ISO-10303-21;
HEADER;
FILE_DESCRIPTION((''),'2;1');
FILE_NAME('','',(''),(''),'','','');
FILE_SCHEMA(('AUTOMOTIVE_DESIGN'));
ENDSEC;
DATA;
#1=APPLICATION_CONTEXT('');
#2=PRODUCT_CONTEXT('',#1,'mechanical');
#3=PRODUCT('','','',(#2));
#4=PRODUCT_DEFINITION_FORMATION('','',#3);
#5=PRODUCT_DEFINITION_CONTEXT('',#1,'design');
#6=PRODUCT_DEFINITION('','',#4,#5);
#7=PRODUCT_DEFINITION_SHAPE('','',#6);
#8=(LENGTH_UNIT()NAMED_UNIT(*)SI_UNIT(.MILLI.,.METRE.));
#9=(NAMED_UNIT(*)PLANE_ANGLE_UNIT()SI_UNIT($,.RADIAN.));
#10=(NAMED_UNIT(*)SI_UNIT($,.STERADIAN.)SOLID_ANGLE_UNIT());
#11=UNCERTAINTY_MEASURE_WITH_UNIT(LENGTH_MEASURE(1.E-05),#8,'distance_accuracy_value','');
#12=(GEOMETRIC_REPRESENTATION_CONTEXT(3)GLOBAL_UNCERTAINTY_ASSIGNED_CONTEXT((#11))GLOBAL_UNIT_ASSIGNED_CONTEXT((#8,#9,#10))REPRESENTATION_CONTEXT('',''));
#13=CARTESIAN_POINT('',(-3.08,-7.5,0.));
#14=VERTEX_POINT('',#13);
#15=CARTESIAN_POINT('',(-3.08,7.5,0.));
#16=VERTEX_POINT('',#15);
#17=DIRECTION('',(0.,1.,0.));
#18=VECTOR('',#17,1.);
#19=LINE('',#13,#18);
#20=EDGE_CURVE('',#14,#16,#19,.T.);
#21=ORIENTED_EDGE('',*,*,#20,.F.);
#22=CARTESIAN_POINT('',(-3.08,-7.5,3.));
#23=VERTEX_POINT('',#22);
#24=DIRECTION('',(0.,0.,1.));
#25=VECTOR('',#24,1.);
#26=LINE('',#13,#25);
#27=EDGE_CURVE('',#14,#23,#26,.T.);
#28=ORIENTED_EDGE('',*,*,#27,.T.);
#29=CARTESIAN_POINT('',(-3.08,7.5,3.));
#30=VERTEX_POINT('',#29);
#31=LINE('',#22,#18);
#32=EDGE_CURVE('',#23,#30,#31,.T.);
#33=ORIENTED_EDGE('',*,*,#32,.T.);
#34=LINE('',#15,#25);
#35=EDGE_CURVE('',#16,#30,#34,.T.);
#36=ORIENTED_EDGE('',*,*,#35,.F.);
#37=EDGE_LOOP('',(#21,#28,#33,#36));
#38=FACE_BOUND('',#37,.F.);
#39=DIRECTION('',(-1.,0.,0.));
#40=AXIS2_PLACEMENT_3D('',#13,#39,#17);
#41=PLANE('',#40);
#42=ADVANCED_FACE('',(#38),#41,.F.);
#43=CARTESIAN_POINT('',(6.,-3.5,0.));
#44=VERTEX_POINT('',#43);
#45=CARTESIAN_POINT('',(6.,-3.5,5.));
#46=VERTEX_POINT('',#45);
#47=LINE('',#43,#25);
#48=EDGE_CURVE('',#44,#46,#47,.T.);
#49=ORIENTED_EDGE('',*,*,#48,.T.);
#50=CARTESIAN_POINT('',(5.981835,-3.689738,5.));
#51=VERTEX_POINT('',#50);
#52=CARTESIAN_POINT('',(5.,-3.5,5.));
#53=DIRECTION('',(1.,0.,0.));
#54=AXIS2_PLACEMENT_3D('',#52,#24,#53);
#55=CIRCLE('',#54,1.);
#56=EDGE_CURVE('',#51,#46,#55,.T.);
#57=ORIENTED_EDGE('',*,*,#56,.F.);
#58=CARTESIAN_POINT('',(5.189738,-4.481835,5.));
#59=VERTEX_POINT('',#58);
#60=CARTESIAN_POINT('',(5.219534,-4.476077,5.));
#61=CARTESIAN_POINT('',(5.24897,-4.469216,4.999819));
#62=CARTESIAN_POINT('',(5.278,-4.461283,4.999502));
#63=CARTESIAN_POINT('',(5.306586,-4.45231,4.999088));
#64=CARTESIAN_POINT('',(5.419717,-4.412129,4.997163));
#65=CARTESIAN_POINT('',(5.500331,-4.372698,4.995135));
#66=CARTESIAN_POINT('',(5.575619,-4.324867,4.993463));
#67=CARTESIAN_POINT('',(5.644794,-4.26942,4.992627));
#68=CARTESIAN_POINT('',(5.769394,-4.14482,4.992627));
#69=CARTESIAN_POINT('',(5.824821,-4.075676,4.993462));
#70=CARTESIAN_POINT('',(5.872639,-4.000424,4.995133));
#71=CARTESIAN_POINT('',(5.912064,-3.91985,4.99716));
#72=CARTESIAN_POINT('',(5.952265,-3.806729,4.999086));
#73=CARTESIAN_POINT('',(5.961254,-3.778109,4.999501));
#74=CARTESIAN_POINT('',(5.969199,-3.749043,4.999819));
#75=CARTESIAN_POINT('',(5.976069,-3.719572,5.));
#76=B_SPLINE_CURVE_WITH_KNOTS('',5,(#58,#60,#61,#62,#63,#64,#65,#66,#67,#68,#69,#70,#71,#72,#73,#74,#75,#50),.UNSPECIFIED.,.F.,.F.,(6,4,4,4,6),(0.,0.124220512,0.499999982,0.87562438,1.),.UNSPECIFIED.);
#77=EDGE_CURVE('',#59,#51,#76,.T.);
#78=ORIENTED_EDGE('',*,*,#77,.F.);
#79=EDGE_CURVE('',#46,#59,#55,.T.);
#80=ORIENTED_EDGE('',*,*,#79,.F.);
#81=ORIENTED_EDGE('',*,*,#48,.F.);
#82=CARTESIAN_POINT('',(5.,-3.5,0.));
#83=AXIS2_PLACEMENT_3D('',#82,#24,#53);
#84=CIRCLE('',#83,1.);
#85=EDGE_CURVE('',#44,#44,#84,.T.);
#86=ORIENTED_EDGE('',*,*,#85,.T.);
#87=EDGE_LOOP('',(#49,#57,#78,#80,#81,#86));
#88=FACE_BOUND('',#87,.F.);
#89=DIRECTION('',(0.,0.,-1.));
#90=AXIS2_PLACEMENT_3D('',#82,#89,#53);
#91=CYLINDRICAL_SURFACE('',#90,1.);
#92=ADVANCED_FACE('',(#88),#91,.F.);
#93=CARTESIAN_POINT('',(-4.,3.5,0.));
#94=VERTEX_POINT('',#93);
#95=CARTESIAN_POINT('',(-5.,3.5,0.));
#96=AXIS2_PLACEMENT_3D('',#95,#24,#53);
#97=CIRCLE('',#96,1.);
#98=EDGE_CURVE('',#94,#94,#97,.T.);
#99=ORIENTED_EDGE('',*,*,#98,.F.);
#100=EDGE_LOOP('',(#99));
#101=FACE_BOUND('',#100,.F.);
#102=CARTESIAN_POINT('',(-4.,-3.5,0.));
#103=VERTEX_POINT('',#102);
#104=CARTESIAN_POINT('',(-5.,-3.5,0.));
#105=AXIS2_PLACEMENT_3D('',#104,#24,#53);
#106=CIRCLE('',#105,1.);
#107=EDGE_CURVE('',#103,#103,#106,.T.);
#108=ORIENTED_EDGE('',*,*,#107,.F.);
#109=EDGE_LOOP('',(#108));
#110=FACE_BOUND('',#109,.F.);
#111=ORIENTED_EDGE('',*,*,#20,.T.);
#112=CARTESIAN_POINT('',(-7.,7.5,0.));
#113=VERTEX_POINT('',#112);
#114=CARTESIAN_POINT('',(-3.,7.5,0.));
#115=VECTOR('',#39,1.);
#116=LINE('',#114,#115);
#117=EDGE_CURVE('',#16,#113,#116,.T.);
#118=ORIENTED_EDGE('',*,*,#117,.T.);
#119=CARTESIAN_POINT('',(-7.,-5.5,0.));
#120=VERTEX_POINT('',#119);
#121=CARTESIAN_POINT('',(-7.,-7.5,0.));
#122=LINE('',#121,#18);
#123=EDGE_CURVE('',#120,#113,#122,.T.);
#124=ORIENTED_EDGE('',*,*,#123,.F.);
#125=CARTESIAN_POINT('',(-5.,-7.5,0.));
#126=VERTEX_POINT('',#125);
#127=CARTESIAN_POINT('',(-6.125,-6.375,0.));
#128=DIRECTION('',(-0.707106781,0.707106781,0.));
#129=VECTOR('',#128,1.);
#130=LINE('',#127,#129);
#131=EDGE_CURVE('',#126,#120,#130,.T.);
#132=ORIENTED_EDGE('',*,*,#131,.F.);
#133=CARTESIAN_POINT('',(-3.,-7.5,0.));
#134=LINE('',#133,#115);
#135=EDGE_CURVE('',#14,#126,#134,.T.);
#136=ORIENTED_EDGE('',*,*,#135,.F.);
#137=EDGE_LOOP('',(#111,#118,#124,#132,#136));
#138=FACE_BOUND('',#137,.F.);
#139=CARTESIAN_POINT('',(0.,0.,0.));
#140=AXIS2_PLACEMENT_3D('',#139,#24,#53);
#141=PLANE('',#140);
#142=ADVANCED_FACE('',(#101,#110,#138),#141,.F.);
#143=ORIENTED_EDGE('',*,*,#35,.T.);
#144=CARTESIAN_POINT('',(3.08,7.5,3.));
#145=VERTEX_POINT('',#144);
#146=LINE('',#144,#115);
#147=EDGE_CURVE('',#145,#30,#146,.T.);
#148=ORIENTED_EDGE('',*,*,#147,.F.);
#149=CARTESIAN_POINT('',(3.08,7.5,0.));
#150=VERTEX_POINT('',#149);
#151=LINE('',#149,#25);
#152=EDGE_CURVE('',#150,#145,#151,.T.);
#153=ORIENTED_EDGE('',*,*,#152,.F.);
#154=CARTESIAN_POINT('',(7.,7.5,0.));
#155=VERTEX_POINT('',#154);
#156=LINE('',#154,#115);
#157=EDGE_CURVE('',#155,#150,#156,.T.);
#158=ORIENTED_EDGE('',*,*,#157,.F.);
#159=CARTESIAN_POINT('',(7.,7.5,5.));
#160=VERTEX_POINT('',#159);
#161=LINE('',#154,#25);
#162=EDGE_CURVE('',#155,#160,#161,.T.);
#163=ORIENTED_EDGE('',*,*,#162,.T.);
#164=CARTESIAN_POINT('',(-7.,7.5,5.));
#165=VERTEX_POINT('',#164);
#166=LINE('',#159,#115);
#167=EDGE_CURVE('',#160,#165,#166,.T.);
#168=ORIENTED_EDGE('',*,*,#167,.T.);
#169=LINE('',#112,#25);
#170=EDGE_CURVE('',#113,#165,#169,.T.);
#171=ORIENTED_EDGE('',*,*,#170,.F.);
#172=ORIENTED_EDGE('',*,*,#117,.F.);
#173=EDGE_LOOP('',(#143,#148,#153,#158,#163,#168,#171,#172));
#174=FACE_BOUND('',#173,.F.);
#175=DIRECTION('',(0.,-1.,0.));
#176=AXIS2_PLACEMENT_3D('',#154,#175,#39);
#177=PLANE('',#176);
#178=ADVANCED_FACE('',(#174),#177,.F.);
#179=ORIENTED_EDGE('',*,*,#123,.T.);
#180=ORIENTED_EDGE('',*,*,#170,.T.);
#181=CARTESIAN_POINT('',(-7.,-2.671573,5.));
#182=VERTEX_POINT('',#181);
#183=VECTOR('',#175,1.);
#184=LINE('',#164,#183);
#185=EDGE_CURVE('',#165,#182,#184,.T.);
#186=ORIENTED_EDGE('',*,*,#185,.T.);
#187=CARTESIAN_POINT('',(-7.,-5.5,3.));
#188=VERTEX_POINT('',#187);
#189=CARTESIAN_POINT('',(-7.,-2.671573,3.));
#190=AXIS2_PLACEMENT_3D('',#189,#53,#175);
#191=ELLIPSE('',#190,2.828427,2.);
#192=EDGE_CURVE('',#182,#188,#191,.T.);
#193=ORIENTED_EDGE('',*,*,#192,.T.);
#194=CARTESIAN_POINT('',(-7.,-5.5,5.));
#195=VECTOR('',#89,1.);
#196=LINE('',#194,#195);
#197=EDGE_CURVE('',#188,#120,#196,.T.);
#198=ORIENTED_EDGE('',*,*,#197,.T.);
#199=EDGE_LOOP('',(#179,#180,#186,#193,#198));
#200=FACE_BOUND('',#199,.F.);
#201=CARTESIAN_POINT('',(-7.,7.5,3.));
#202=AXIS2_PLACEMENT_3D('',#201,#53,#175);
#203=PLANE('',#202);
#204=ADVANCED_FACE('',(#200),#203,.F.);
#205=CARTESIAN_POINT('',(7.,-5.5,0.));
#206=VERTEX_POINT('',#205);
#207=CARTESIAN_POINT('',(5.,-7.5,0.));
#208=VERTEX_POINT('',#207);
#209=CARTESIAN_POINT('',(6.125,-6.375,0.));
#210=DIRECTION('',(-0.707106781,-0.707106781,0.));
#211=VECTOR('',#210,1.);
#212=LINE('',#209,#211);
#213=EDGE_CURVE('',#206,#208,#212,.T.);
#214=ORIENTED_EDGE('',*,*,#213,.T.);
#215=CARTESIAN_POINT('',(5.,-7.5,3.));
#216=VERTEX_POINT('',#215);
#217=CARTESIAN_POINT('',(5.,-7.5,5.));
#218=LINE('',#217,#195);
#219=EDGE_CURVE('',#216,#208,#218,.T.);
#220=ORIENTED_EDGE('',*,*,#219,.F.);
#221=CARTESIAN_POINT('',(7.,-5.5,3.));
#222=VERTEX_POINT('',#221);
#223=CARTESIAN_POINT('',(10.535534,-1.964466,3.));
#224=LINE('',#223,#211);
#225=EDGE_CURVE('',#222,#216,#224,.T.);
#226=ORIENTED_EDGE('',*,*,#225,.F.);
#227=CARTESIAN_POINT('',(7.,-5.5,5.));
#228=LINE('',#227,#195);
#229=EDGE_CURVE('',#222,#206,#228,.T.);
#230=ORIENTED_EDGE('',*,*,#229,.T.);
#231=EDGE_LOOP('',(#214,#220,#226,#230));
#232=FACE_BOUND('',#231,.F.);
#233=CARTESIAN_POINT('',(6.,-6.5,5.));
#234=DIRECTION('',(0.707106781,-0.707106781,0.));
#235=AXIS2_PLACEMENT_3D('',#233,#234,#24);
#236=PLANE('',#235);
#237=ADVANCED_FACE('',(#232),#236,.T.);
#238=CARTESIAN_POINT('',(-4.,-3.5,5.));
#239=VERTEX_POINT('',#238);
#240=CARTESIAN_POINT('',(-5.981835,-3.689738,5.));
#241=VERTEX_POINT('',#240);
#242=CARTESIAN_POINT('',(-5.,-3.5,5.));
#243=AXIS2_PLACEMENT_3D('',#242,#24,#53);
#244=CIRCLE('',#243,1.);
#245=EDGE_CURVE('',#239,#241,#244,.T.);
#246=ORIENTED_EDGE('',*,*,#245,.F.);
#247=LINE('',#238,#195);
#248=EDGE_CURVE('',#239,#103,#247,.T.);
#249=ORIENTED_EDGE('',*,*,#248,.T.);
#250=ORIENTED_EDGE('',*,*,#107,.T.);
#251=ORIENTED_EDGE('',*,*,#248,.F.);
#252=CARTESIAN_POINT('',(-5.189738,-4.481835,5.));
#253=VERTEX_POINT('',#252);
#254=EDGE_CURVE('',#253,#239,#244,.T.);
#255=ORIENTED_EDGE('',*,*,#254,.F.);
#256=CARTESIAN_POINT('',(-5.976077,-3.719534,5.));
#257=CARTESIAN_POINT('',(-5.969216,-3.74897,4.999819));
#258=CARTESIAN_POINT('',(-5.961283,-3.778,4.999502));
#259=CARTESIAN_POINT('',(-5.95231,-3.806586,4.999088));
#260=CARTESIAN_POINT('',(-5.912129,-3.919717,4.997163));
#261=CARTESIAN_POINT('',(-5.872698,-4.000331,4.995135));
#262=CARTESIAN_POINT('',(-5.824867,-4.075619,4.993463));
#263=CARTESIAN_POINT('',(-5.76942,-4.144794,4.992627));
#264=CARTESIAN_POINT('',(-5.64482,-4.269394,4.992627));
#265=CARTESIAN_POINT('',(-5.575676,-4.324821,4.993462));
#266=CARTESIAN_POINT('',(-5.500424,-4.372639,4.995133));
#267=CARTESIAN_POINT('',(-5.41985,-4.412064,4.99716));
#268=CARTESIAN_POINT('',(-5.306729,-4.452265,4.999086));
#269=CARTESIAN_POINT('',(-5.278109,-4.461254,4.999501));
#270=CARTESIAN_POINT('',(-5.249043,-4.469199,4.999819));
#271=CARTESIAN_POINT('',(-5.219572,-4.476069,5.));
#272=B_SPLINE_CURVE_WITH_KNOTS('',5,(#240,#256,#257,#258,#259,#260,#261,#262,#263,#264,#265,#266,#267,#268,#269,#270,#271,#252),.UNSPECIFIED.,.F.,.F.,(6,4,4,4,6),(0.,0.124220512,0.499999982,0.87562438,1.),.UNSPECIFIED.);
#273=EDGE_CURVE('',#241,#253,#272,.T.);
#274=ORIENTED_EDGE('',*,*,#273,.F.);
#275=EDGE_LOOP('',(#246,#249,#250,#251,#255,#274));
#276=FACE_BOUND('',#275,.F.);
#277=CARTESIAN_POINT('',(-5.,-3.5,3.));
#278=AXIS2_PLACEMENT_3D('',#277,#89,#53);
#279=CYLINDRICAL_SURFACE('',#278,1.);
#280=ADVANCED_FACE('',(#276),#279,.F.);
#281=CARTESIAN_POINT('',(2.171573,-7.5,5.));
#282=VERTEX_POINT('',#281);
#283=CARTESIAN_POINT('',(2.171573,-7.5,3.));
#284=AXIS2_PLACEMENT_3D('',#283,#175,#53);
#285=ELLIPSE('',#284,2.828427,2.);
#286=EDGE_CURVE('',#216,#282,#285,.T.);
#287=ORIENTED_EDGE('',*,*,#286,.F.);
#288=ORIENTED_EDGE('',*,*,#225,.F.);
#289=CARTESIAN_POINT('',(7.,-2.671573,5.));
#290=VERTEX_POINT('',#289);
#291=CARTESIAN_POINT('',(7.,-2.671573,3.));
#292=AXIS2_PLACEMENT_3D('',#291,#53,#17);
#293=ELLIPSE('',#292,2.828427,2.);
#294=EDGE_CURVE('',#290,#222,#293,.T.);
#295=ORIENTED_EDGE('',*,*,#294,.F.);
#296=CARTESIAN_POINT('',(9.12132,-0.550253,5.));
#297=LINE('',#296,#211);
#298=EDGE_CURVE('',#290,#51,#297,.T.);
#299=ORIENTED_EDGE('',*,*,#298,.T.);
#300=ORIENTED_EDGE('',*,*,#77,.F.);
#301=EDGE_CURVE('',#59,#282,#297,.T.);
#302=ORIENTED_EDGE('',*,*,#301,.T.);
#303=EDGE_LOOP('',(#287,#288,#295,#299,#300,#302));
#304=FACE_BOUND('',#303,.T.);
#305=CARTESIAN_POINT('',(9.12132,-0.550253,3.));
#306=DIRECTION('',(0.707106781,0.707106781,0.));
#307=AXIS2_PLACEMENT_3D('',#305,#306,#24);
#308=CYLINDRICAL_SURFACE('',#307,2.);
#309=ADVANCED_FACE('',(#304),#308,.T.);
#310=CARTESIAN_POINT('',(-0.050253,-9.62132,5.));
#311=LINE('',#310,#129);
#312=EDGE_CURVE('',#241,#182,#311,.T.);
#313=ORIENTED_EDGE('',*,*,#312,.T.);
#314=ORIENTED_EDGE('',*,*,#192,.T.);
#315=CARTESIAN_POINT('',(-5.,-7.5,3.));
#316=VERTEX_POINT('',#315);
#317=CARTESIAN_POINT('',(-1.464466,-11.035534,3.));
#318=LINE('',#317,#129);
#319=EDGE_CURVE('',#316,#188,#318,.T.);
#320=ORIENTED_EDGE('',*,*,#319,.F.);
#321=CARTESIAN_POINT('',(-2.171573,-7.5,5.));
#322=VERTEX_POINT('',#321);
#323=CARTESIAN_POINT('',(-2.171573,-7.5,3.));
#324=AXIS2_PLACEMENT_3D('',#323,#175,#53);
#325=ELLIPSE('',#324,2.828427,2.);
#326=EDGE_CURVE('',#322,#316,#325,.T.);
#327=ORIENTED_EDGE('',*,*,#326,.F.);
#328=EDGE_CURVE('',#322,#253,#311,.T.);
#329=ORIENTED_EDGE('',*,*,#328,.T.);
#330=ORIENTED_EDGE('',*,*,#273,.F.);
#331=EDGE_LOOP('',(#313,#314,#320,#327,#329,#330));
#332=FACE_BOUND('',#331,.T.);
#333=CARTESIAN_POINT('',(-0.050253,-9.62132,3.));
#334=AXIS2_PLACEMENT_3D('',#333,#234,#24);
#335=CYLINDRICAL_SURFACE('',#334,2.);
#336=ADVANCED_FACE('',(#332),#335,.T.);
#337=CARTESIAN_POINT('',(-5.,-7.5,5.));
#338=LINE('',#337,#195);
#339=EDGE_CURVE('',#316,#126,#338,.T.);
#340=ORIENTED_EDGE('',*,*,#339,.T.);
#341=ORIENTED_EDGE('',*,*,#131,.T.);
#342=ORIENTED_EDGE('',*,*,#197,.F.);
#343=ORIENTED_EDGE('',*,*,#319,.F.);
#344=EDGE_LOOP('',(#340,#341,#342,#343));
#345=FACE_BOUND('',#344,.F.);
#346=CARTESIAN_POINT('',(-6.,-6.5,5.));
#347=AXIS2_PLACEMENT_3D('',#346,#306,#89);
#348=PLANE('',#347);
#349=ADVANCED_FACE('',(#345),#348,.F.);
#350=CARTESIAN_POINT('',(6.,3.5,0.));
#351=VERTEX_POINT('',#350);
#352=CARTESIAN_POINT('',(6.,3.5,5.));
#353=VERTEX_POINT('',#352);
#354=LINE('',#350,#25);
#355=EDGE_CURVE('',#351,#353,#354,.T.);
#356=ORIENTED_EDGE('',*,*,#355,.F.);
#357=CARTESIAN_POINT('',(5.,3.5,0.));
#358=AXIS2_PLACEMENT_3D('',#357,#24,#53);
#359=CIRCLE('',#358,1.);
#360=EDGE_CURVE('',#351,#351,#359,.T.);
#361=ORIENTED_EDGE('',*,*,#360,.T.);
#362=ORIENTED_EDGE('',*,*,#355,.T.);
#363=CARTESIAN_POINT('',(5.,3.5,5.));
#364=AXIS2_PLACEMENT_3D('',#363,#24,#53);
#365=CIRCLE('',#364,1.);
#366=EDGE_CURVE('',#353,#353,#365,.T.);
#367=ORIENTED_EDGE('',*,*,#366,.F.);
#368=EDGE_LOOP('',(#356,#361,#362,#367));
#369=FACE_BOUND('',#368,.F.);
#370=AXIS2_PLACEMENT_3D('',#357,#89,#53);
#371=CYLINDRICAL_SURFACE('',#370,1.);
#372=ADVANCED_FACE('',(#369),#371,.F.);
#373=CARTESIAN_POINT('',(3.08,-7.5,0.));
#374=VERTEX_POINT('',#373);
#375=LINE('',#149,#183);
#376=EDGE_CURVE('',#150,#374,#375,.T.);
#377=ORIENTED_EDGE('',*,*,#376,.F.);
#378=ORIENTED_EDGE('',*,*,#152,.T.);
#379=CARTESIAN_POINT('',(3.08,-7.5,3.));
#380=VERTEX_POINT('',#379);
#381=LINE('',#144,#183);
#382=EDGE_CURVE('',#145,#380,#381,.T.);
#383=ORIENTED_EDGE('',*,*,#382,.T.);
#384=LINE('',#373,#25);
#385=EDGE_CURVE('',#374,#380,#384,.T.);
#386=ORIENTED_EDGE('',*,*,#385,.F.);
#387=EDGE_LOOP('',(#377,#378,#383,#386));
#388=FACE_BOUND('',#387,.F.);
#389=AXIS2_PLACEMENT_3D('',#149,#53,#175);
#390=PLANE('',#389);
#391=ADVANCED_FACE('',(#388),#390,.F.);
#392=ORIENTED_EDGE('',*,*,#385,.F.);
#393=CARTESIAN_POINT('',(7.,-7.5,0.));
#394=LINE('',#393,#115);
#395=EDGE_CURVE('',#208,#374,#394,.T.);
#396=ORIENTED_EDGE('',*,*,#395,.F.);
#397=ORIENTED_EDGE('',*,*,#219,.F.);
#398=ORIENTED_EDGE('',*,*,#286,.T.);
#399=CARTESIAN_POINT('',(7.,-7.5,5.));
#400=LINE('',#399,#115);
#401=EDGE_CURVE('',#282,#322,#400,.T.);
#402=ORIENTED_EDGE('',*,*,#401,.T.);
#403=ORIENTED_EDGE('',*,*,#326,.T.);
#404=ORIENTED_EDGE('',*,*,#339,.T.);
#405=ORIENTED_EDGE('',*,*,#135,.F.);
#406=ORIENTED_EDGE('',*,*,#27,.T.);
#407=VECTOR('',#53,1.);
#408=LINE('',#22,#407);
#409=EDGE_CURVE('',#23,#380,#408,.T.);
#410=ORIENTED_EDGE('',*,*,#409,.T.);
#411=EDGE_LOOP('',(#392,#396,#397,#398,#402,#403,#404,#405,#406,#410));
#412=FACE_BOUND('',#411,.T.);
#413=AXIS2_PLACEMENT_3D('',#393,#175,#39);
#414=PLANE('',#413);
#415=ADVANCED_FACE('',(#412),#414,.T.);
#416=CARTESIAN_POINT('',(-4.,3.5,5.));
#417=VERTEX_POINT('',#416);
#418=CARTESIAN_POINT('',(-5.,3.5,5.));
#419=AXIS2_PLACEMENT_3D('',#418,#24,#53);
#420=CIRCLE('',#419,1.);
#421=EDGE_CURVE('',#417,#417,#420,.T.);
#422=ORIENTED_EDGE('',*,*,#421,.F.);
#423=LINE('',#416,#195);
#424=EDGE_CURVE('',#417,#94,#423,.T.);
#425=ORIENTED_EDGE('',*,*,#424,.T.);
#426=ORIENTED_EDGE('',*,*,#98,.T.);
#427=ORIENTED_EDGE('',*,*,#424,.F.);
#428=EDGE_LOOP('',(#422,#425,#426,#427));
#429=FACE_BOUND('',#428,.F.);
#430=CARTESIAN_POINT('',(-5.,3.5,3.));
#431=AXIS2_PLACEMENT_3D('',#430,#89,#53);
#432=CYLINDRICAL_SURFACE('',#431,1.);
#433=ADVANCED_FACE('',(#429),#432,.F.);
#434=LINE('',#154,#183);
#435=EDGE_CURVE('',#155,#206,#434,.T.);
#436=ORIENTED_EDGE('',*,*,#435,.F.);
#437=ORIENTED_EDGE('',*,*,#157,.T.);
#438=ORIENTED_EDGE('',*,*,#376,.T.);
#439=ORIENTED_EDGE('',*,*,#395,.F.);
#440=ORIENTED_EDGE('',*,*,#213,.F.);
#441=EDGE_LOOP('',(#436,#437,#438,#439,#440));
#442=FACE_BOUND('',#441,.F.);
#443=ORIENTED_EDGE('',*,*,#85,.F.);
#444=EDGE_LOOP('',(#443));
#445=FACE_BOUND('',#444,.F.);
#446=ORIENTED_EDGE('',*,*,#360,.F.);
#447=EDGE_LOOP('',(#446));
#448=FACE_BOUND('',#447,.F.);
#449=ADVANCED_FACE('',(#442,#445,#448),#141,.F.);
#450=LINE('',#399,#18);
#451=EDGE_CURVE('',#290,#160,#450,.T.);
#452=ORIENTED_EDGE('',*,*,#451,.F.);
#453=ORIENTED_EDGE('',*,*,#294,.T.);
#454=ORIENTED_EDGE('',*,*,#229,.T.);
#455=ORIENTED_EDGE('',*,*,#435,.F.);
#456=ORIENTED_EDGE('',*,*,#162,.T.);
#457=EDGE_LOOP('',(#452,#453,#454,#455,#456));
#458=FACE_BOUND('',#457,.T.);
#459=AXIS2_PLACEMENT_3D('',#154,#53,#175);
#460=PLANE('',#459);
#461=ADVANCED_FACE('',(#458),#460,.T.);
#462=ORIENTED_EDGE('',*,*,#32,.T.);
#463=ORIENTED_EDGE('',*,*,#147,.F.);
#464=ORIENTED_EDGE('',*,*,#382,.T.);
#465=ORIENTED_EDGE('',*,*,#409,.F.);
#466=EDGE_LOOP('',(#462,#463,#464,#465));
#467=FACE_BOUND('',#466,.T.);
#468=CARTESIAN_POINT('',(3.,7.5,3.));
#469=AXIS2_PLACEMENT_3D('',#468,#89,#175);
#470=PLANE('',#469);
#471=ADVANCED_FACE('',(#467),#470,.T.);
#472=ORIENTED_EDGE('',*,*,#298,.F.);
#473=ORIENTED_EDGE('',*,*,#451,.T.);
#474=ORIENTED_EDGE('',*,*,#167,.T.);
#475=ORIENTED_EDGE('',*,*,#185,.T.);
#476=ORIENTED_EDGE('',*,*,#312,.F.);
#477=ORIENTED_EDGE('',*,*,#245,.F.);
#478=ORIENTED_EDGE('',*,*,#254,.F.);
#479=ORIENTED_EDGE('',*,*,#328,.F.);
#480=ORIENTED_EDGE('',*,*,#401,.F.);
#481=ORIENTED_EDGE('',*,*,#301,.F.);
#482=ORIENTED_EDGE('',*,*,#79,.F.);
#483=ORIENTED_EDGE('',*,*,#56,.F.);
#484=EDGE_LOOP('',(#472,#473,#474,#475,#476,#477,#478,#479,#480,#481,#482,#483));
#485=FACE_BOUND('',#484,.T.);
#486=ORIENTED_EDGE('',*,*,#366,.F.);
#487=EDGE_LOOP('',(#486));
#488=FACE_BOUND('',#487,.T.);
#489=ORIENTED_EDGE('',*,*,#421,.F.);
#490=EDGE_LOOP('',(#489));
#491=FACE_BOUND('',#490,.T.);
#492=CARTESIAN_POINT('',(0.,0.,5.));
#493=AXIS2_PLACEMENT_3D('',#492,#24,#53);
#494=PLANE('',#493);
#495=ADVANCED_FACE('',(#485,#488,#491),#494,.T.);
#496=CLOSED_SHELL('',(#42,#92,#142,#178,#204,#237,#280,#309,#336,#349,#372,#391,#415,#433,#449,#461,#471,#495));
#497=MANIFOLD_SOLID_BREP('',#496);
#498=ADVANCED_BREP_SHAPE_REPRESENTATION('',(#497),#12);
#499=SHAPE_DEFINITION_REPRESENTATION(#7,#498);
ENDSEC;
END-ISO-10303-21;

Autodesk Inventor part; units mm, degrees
ref_plane "YZ Plane" through (0, 0, 0) normal (1, 0, 0) x (0, 1, 0)
ref_plane "XZ Plane" through (0, 0, 0) normal (0, 1, 0) x (-1, 0, 0)
ref_plane "XY Plane" through (0, 0, 0) normal (0, 0, 1) x (1, 0, 0)
sketch "Sketch1" plane through (0, 0, 0) normal (0, 0, 1) x (1, 0, 0)
  line L0 (7, 7.5) -> (3, 7.5) projected
  line L1 (3, 7.5) -> (3, -7.5) projected
  line L2 (7, -7.5) -> (3, -7.5) projected
  line L3 (7, 7.5) -> (7, -7.5) projected
  circle A0 centre (5, -3.5) radius 1 projected
  circle A1 centre (5, 3.5) radius 1 projected
  line L4 (-3, 7.5) -> (-7, 7.5) projected
  line L5 (-7, -7.5) -> (-7, 7.5) projected
  line L6 (-3, -7.5) -> (-7, -7.5) projected
  line L7 (-3, -7.5) -> (-3, 7.5) projected
  circle A2 centre (-5, 3.5) radius 1 projected
  circle A3 centre (-5, -3.5) radius 1 projected
  point P0 (0, 0)
extrude "Extrusion1" add sketch "Sketch1" along normal blind 3
sketch "Sketch2" plane through (0, 0, 3) normal (0, 0, 1) x (1, 0, 0)
  line L0 (7, -7.5) -> (7, 7.5) projected
  line L1 (7, 7.5) -> (3, 7.5) projected
  line L2 (3, 7.5) -> (3, -7.5) projected
  line L3 (3, -7.5) -> (7, -7.5) projected
  circle A0 centre (5, -3.5) radius 1 projected
  circle A1 centre (5, 3.5) radius 1 projected
  line L4 (-3, -7.5) -> (-3, 7.5) projected
  line L5 (-3, 7.5) -> (-7, 7.5) projected
  line L6 (-7, 7.5) -> (-7, -7.5) projected
  line L7 (-7, -7.5) -> (-3, -7.5) projected
  circle A2 centre (-5, 3.5) radius 1 projected
  circle A3 centre (-5, -3.5) radius 1 projected
  line L8 (7, -7.5) -> (-7, -7.5)
  line L9 (-7, -7.5) -> (-7, 7.5)
  line L10 (-7, 7.5) -> (7, 7.5)
  line L11 (7, 7.5) -> (7, -7.5)
  point P0 (0, 0)
extrude "Extrusion2" add sketch "Sketch2" along normal blind 2
chamfer "Chamfer1" distance 2 angle 45 2 edges at (7, -7.5, 2.5) (-7, -7.5, 2.5)
fillet "Fillet1" radius 2 2 edges at (6, -6.5, 5) (-6, -6.5, 5)
thicken "Thicken1" operation add thickness 0.08 both sides no extend neighbours yes toward (-1, 0, 0) faces at (-3, -2.5, 1)
thicken "Thicken2" operation add thickness 0.08 both sides no extend neighbours yes toward (1, 0, 0) faces at (3, 2.5, 1)
properties part number "sub_arm_2_mod"
